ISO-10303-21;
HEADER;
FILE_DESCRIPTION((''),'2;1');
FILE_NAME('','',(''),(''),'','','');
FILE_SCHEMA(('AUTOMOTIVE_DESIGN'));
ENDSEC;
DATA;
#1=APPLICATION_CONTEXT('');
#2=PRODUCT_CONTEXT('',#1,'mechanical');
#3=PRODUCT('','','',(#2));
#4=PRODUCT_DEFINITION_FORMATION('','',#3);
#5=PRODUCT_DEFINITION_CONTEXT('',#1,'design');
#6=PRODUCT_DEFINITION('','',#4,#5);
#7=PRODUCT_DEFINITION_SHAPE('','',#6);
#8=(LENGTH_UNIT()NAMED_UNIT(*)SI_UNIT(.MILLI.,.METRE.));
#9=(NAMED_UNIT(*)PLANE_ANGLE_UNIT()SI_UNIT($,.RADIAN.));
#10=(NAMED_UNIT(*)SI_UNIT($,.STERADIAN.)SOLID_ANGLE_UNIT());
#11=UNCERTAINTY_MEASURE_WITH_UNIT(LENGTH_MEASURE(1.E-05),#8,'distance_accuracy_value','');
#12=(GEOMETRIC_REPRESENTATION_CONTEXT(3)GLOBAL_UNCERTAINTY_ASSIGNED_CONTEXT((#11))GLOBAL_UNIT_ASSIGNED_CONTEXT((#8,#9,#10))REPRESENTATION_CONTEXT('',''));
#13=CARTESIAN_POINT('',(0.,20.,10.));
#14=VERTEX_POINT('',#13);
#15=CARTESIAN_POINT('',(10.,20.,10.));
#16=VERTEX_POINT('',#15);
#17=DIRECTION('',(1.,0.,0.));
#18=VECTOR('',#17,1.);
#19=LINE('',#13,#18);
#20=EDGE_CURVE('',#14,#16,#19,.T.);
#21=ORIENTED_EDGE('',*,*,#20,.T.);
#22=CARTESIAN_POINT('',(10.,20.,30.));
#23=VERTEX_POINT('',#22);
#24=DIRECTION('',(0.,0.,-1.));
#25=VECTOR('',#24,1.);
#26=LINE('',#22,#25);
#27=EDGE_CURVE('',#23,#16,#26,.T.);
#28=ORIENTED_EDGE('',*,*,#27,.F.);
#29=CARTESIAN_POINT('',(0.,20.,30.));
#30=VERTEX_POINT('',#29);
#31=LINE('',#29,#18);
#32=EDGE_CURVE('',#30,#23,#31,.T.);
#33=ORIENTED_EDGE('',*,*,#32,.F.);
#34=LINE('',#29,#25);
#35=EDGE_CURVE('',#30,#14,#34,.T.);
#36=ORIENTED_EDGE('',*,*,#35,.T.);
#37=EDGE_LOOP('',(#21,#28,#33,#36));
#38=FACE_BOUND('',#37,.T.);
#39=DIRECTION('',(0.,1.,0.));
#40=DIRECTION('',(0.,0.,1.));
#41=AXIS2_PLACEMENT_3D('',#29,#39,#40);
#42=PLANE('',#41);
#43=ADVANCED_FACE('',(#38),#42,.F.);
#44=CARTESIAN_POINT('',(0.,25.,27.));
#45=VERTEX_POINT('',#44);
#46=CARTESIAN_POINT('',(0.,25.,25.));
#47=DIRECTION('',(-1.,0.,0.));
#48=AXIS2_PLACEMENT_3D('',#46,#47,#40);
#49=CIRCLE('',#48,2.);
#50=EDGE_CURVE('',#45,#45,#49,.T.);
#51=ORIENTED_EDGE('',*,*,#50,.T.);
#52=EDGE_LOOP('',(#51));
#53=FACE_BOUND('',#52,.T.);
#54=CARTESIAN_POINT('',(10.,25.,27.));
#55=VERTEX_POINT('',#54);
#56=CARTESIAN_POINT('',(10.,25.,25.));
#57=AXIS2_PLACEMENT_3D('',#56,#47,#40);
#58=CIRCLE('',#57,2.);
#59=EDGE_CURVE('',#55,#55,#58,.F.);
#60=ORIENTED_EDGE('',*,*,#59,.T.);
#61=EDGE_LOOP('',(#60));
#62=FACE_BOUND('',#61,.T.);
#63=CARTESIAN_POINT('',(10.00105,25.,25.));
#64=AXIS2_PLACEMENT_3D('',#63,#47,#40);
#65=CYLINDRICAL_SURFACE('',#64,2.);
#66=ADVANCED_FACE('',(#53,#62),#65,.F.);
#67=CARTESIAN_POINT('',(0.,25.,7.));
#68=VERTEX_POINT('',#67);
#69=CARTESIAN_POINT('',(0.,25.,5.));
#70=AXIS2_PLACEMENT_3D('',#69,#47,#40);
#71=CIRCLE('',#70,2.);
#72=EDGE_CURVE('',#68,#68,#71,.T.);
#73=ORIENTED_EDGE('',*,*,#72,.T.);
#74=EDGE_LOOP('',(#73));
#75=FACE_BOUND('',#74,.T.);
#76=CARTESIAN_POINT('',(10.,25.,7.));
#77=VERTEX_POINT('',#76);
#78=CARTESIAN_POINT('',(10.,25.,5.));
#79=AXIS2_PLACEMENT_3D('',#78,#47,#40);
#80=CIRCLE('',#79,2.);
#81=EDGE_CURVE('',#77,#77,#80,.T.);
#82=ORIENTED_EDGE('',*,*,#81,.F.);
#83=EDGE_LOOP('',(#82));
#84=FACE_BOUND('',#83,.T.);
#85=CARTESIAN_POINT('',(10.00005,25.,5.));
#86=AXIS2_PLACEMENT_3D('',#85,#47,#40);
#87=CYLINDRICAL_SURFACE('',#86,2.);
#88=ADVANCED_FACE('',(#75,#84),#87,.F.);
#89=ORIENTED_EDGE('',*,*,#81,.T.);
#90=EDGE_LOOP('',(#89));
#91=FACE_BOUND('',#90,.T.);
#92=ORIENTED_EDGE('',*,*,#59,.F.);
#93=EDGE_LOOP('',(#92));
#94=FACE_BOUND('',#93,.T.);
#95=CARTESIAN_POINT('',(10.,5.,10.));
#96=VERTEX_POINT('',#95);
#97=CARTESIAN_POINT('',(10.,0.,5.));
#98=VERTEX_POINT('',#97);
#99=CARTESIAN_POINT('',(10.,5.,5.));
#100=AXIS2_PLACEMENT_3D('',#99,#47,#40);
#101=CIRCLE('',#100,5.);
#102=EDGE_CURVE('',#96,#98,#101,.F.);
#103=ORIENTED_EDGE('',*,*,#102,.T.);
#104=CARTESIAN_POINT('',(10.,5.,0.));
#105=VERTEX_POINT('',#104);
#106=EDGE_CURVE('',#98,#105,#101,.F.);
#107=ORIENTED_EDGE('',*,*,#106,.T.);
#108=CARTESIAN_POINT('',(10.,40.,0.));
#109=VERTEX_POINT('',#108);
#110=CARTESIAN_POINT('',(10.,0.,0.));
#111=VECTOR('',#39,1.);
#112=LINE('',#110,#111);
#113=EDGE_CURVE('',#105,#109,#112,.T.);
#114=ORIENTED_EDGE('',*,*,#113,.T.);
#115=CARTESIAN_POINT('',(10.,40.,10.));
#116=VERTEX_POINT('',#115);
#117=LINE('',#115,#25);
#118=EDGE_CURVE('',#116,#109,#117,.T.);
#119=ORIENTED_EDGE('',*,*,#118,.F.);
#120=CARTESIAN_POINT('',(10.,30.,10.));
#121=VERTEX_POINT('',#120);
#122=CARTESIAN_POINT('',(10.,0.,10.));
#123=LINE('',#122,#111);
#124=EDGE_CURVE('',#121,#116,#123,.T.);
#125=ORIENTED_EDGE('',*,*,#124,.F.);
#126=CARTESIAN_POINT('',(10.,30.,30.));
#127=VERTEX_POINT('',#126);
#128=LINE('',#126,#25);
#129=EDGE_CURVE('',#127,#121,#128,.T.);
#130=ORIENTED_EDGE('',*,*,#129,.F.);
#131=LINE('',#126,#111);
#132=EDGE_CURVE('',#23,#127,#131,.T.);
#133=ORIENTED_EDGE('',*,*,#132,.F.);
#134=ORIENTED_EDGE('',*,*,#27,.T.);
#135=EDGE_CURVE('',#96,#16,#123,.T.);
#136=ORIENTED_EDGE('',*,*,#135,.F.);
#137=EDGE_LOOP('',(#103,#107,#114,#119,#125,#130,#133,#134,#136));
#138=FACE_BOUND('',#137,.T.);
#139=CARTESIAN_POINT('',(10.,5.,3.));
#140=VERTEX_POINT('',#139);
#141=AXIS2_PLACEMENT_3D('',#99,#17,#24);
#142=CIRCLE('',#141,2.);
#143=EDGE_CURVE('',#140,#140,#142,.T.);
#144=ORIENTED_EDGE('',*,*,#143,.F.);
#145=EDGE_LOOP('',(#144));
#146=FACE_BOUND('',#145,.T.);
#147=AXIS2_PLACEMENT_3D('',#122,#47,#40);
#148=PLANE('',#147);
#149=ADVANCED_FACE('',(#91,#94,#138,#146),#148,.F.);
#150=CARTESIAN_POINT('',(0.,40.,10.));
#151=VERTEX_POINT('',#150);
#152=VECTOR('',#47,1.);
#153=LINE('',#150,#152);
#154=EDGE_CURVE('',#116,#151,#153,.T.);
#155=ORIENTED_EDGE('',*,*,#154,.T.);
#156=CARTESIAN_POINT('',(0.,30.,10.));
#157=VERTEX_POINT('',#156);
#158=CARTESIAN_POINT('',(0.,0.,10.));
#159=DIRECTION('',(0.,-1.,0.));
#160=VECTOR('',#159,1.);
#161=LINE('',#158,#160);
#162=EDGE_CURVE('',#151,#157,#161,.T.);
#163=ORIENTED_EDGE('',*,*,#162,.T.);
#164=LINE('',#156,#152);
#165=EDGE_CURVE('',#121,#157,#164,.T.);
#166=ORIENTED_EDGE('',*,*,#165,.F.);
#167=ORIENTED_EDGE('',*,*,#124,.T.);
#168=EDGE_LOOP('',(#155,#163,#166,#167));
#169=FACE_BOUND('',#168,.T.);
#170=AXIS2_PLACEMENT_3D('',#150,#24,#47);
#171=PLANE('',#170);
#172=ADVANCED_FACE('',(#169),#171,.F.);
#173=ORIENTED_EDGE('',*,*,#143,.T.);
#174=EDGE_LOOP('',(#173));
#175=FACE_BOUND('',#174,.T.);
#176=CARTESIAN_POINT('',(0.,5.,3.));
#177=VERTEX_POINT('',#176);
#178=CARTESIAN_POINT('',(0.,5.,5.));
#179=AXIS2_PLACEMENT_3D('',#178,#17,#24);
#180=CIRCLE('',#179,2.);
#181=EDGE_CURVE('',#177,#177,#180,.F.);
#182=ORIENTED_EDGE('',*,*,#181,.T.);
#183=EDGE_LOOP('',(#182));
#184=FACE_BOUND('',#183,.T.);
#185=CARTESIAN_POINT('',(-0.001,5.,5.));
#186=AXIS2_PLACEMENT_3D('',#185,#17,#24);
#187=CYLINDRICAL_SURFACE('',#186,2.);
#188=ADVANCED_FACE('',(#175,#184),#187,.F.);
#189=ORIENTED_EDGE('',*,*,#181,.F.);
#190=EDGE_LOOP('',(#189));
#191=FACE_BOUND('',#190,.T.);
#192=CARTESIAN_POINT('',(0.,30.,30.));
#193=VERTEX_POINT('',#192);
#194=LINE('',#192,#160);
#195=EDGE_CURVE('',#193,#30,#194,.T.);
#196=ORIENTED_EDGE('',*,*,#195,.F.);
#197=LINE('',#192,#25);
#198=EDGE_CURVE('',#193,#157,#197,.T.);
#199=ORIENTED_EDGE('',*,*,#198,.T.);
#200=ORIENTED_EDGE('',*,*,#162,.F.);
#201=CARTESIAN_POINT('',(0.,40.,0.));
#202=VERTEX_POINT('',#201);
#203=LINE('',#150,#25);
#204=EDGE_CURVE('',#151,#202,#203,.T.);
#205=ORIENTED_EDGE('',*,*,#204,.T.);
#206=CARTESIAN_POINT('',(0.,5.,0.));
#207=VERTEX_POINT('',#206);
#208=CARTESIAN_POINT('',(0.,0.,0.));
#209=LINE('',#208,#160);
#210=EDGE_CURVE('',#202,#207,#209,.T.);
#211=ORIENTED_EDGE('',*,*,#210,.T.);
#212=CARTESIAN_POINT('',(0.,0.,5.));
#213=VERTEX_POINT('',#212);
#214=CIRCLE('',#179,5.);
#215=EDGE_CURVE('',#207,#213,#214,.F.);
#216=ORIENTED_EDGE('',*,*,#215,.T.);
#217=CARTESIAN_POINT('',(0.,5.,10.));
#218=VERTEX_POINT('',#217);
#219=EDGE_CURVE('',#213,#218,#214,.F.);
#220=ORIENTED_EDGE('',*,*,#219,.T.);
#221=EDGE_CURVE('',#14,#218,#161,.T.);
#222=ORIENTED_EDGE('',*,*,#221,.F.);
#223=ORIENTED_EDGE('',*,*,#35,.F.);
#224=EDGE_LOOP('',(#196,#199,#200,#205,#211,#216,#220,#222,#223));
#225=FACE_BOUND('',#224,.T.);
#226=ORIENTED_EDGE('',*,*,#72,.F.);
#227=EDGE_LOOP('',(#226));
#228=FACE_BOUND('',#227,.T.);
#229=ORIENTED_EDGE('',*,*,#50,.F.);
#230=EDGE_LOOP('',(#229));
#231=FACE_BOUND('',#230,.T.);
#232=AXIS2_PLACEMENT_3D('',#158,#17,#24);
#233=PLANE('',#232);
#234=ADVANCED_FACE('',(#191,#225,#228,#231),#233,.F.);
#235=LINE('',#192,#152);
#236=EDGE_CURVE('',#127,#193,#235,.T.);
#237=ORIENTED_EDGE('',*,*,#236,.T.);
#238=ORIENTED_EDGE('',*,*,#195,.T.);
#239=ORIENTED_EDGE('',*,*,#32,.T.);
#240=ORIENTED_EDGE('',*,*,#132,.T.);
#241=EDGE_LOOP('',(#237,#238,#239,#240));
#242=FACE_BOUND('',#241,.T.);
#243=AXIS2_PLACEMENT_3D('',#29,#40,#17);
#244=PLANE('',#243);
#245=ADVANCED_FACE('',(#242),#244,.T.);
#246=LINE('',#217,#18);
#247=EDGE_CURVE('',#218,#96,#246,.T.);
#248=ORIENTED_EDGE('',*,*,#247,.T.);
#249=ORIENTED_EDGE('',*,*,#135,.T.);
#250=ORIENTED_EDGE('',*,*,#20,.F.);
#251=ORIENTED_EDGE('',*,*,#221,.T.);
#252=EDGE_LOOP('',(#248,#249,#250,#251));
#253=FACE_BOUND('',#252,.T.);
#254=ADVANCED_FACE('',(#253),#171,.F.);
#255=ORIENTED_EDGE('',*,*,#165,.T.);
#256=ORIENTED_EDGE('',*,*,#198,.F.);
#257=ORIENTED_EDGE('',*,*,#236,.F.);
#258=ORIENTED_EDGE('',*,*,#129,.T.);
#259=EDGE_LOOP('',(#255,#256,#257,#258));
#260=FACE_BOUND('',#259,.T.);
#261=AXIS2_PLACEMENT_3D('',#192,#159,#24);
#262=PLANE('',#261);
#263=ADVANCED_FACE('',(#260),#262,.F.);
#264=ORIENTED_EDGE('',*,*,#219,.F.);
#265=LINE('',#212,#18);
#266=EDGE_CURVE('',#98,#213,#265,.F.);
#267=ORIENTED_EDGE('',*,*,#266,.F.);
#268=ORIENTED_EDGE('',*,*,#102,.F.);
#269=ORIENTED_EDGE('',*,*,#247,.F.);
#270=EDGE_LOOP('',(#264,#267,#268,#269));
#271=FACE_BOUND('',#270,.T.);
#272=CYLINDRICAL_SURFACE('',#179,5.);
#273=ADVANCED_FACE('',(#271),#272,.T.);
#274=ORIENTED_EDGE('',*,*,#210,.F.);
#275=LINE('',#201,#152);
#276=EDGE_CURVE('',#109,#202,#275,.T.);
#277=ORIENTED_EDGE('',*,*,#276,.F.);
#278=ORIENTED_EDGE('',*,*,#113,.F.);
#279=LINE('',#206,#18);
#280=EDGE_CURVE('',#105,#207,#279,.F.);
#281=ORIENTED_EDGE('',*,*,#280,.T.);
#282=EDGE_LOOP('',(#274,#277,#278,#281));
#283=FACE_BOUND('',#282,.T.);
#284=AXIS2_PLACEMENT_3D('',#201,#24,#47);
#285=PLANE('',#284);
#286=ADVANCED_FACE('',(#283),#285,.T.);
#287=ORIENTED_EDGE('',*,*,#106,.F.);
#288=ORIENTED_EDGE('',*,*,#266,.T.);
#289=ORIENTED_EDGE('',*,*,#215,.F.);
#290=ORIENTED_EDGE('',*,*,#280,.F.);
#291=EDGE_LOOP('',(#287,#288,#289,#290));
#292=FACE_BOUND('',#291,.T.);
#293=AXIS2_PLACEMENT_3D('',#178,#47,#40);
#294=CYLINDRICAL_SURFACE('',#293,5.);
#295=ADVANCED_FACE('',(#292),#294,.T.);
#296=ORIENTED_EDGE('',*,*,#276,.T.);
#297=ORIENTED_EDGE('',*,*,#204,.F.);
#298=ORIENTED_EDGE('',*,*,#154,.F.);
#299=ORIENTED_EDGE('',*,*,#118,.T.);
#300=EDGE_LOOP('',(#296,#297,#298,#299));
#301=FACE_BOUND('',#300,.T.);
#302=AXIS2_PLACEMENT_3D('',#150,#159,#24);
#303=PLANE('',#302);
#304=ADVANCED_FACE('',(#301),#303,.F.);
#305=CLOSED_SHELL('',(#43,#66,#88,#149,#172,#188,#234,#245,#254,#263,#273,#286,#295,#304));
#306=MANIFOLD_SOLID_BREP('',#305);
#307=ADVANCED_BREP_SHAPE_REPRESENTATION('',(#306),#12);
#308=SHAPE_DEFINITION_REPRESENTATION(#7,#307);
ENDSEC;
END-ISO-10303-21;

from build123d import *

# Parameters (mm, degrees)
SKETCH1_W           = 10
SKETCH1_H           = 40
BOSS_EXTRUDE1_DEPTH = 10
CUT_EXTRUDE1_REACH  = 44.426
SKETCH2_R           = 2
SKETCH3_W           = 10
SKETCH3_H           = 10
BOSS_EXTRUDE2_DEPTH = 20
CUT_EXTRUDE2_REACH  = 52.99
SKETCH4_R           = 2
SKETCH5_R           = 2
CUT_EXTRUDE3_DEPTH  = 51.990195136
FILLET1_R           = 5


with BuildPart() as part:
    # Sketch1 → Boss-Extrude1 (new body)
    with BuildSketch(Plane.XY):
        with Locations((5, 20)):
            Rectangle(SKETCH1_W, SKETCH1_H)
    extrude(amount=BOSS_EXTRUDE1_DEPTH)

    # Sketch2 → Cut-Extrude1 (cut, up to next)
    with BuildSketch(Plane(origin=(10, 0, 0), x_dir=(0, 0, -1), z_dir=(1, 0, 0)), mode=Mode.PRIVATE) as cut_extrude1_sk1:
        with Locations((-5, 5)):
            Circle(SKETCH2_R)
    cut_extrude1_tool1 = extrude(cut_extrude1_sk1.sketch, amount=-CUT_EXTRUDE1_REACH, mode=Mode.PRIVATE) & part.part
    add(cut_extrude1_tool1.solids().sort_by_distance((10, 5, 5))[0], mode=Mode.SUBTRACT)

    # Sketch3 → Boss-Extrude2 (add)
    with BuildSketch(Plane.XY.offset(10)):
        with Locations((5, 25)):
            Rectangle(SKETCH3_W, SKETCH3_H)
    extrude(amount=BOSS_EXTRUDE2_DEPTH)

    # Sketch4 → Cut-Extrude2 (cut, up to next)
    with BuildSketch(Plane.ZY, mode=Mode.PRIVATE) as cut_extrude2_sk1:
        with Locations((25, 25)):
            Circle(SKETCH4_R)
    cut_extrude2_tool1 = extrude(cut_extrude2_sk1.sketch, amount=-CUT_EXTRUDE2_REACH, mode=Mode.PRIVATE) & part.part
    add(cut_extrude2_tool1.solids().sort_by_distance((0, 25, 25))[0], mode=Mode.SUBTRACT)

    # Sketch5 → Cut-Extrude3 (cut, through all)
    with BuildSketch(Plane.ZY):
        with Locations((5, 25)):
            Circle(SKETCH5_R)
    extrude(amount=-CUT_EXTRUDE3_DEPTH, mode=Mode.SUBTRACT)

    # Fillet1
    fillet1_edges = [part.edges().sort_by_distance(p)[0] for p in [
        (5, 0, 0),
        (5, 0, 10),
    ]]
    fillet(fillet1_edges, radius=FILLET1_R - 0.0001)  # a hair under: the kernel refuses the full size


solid = part.part
